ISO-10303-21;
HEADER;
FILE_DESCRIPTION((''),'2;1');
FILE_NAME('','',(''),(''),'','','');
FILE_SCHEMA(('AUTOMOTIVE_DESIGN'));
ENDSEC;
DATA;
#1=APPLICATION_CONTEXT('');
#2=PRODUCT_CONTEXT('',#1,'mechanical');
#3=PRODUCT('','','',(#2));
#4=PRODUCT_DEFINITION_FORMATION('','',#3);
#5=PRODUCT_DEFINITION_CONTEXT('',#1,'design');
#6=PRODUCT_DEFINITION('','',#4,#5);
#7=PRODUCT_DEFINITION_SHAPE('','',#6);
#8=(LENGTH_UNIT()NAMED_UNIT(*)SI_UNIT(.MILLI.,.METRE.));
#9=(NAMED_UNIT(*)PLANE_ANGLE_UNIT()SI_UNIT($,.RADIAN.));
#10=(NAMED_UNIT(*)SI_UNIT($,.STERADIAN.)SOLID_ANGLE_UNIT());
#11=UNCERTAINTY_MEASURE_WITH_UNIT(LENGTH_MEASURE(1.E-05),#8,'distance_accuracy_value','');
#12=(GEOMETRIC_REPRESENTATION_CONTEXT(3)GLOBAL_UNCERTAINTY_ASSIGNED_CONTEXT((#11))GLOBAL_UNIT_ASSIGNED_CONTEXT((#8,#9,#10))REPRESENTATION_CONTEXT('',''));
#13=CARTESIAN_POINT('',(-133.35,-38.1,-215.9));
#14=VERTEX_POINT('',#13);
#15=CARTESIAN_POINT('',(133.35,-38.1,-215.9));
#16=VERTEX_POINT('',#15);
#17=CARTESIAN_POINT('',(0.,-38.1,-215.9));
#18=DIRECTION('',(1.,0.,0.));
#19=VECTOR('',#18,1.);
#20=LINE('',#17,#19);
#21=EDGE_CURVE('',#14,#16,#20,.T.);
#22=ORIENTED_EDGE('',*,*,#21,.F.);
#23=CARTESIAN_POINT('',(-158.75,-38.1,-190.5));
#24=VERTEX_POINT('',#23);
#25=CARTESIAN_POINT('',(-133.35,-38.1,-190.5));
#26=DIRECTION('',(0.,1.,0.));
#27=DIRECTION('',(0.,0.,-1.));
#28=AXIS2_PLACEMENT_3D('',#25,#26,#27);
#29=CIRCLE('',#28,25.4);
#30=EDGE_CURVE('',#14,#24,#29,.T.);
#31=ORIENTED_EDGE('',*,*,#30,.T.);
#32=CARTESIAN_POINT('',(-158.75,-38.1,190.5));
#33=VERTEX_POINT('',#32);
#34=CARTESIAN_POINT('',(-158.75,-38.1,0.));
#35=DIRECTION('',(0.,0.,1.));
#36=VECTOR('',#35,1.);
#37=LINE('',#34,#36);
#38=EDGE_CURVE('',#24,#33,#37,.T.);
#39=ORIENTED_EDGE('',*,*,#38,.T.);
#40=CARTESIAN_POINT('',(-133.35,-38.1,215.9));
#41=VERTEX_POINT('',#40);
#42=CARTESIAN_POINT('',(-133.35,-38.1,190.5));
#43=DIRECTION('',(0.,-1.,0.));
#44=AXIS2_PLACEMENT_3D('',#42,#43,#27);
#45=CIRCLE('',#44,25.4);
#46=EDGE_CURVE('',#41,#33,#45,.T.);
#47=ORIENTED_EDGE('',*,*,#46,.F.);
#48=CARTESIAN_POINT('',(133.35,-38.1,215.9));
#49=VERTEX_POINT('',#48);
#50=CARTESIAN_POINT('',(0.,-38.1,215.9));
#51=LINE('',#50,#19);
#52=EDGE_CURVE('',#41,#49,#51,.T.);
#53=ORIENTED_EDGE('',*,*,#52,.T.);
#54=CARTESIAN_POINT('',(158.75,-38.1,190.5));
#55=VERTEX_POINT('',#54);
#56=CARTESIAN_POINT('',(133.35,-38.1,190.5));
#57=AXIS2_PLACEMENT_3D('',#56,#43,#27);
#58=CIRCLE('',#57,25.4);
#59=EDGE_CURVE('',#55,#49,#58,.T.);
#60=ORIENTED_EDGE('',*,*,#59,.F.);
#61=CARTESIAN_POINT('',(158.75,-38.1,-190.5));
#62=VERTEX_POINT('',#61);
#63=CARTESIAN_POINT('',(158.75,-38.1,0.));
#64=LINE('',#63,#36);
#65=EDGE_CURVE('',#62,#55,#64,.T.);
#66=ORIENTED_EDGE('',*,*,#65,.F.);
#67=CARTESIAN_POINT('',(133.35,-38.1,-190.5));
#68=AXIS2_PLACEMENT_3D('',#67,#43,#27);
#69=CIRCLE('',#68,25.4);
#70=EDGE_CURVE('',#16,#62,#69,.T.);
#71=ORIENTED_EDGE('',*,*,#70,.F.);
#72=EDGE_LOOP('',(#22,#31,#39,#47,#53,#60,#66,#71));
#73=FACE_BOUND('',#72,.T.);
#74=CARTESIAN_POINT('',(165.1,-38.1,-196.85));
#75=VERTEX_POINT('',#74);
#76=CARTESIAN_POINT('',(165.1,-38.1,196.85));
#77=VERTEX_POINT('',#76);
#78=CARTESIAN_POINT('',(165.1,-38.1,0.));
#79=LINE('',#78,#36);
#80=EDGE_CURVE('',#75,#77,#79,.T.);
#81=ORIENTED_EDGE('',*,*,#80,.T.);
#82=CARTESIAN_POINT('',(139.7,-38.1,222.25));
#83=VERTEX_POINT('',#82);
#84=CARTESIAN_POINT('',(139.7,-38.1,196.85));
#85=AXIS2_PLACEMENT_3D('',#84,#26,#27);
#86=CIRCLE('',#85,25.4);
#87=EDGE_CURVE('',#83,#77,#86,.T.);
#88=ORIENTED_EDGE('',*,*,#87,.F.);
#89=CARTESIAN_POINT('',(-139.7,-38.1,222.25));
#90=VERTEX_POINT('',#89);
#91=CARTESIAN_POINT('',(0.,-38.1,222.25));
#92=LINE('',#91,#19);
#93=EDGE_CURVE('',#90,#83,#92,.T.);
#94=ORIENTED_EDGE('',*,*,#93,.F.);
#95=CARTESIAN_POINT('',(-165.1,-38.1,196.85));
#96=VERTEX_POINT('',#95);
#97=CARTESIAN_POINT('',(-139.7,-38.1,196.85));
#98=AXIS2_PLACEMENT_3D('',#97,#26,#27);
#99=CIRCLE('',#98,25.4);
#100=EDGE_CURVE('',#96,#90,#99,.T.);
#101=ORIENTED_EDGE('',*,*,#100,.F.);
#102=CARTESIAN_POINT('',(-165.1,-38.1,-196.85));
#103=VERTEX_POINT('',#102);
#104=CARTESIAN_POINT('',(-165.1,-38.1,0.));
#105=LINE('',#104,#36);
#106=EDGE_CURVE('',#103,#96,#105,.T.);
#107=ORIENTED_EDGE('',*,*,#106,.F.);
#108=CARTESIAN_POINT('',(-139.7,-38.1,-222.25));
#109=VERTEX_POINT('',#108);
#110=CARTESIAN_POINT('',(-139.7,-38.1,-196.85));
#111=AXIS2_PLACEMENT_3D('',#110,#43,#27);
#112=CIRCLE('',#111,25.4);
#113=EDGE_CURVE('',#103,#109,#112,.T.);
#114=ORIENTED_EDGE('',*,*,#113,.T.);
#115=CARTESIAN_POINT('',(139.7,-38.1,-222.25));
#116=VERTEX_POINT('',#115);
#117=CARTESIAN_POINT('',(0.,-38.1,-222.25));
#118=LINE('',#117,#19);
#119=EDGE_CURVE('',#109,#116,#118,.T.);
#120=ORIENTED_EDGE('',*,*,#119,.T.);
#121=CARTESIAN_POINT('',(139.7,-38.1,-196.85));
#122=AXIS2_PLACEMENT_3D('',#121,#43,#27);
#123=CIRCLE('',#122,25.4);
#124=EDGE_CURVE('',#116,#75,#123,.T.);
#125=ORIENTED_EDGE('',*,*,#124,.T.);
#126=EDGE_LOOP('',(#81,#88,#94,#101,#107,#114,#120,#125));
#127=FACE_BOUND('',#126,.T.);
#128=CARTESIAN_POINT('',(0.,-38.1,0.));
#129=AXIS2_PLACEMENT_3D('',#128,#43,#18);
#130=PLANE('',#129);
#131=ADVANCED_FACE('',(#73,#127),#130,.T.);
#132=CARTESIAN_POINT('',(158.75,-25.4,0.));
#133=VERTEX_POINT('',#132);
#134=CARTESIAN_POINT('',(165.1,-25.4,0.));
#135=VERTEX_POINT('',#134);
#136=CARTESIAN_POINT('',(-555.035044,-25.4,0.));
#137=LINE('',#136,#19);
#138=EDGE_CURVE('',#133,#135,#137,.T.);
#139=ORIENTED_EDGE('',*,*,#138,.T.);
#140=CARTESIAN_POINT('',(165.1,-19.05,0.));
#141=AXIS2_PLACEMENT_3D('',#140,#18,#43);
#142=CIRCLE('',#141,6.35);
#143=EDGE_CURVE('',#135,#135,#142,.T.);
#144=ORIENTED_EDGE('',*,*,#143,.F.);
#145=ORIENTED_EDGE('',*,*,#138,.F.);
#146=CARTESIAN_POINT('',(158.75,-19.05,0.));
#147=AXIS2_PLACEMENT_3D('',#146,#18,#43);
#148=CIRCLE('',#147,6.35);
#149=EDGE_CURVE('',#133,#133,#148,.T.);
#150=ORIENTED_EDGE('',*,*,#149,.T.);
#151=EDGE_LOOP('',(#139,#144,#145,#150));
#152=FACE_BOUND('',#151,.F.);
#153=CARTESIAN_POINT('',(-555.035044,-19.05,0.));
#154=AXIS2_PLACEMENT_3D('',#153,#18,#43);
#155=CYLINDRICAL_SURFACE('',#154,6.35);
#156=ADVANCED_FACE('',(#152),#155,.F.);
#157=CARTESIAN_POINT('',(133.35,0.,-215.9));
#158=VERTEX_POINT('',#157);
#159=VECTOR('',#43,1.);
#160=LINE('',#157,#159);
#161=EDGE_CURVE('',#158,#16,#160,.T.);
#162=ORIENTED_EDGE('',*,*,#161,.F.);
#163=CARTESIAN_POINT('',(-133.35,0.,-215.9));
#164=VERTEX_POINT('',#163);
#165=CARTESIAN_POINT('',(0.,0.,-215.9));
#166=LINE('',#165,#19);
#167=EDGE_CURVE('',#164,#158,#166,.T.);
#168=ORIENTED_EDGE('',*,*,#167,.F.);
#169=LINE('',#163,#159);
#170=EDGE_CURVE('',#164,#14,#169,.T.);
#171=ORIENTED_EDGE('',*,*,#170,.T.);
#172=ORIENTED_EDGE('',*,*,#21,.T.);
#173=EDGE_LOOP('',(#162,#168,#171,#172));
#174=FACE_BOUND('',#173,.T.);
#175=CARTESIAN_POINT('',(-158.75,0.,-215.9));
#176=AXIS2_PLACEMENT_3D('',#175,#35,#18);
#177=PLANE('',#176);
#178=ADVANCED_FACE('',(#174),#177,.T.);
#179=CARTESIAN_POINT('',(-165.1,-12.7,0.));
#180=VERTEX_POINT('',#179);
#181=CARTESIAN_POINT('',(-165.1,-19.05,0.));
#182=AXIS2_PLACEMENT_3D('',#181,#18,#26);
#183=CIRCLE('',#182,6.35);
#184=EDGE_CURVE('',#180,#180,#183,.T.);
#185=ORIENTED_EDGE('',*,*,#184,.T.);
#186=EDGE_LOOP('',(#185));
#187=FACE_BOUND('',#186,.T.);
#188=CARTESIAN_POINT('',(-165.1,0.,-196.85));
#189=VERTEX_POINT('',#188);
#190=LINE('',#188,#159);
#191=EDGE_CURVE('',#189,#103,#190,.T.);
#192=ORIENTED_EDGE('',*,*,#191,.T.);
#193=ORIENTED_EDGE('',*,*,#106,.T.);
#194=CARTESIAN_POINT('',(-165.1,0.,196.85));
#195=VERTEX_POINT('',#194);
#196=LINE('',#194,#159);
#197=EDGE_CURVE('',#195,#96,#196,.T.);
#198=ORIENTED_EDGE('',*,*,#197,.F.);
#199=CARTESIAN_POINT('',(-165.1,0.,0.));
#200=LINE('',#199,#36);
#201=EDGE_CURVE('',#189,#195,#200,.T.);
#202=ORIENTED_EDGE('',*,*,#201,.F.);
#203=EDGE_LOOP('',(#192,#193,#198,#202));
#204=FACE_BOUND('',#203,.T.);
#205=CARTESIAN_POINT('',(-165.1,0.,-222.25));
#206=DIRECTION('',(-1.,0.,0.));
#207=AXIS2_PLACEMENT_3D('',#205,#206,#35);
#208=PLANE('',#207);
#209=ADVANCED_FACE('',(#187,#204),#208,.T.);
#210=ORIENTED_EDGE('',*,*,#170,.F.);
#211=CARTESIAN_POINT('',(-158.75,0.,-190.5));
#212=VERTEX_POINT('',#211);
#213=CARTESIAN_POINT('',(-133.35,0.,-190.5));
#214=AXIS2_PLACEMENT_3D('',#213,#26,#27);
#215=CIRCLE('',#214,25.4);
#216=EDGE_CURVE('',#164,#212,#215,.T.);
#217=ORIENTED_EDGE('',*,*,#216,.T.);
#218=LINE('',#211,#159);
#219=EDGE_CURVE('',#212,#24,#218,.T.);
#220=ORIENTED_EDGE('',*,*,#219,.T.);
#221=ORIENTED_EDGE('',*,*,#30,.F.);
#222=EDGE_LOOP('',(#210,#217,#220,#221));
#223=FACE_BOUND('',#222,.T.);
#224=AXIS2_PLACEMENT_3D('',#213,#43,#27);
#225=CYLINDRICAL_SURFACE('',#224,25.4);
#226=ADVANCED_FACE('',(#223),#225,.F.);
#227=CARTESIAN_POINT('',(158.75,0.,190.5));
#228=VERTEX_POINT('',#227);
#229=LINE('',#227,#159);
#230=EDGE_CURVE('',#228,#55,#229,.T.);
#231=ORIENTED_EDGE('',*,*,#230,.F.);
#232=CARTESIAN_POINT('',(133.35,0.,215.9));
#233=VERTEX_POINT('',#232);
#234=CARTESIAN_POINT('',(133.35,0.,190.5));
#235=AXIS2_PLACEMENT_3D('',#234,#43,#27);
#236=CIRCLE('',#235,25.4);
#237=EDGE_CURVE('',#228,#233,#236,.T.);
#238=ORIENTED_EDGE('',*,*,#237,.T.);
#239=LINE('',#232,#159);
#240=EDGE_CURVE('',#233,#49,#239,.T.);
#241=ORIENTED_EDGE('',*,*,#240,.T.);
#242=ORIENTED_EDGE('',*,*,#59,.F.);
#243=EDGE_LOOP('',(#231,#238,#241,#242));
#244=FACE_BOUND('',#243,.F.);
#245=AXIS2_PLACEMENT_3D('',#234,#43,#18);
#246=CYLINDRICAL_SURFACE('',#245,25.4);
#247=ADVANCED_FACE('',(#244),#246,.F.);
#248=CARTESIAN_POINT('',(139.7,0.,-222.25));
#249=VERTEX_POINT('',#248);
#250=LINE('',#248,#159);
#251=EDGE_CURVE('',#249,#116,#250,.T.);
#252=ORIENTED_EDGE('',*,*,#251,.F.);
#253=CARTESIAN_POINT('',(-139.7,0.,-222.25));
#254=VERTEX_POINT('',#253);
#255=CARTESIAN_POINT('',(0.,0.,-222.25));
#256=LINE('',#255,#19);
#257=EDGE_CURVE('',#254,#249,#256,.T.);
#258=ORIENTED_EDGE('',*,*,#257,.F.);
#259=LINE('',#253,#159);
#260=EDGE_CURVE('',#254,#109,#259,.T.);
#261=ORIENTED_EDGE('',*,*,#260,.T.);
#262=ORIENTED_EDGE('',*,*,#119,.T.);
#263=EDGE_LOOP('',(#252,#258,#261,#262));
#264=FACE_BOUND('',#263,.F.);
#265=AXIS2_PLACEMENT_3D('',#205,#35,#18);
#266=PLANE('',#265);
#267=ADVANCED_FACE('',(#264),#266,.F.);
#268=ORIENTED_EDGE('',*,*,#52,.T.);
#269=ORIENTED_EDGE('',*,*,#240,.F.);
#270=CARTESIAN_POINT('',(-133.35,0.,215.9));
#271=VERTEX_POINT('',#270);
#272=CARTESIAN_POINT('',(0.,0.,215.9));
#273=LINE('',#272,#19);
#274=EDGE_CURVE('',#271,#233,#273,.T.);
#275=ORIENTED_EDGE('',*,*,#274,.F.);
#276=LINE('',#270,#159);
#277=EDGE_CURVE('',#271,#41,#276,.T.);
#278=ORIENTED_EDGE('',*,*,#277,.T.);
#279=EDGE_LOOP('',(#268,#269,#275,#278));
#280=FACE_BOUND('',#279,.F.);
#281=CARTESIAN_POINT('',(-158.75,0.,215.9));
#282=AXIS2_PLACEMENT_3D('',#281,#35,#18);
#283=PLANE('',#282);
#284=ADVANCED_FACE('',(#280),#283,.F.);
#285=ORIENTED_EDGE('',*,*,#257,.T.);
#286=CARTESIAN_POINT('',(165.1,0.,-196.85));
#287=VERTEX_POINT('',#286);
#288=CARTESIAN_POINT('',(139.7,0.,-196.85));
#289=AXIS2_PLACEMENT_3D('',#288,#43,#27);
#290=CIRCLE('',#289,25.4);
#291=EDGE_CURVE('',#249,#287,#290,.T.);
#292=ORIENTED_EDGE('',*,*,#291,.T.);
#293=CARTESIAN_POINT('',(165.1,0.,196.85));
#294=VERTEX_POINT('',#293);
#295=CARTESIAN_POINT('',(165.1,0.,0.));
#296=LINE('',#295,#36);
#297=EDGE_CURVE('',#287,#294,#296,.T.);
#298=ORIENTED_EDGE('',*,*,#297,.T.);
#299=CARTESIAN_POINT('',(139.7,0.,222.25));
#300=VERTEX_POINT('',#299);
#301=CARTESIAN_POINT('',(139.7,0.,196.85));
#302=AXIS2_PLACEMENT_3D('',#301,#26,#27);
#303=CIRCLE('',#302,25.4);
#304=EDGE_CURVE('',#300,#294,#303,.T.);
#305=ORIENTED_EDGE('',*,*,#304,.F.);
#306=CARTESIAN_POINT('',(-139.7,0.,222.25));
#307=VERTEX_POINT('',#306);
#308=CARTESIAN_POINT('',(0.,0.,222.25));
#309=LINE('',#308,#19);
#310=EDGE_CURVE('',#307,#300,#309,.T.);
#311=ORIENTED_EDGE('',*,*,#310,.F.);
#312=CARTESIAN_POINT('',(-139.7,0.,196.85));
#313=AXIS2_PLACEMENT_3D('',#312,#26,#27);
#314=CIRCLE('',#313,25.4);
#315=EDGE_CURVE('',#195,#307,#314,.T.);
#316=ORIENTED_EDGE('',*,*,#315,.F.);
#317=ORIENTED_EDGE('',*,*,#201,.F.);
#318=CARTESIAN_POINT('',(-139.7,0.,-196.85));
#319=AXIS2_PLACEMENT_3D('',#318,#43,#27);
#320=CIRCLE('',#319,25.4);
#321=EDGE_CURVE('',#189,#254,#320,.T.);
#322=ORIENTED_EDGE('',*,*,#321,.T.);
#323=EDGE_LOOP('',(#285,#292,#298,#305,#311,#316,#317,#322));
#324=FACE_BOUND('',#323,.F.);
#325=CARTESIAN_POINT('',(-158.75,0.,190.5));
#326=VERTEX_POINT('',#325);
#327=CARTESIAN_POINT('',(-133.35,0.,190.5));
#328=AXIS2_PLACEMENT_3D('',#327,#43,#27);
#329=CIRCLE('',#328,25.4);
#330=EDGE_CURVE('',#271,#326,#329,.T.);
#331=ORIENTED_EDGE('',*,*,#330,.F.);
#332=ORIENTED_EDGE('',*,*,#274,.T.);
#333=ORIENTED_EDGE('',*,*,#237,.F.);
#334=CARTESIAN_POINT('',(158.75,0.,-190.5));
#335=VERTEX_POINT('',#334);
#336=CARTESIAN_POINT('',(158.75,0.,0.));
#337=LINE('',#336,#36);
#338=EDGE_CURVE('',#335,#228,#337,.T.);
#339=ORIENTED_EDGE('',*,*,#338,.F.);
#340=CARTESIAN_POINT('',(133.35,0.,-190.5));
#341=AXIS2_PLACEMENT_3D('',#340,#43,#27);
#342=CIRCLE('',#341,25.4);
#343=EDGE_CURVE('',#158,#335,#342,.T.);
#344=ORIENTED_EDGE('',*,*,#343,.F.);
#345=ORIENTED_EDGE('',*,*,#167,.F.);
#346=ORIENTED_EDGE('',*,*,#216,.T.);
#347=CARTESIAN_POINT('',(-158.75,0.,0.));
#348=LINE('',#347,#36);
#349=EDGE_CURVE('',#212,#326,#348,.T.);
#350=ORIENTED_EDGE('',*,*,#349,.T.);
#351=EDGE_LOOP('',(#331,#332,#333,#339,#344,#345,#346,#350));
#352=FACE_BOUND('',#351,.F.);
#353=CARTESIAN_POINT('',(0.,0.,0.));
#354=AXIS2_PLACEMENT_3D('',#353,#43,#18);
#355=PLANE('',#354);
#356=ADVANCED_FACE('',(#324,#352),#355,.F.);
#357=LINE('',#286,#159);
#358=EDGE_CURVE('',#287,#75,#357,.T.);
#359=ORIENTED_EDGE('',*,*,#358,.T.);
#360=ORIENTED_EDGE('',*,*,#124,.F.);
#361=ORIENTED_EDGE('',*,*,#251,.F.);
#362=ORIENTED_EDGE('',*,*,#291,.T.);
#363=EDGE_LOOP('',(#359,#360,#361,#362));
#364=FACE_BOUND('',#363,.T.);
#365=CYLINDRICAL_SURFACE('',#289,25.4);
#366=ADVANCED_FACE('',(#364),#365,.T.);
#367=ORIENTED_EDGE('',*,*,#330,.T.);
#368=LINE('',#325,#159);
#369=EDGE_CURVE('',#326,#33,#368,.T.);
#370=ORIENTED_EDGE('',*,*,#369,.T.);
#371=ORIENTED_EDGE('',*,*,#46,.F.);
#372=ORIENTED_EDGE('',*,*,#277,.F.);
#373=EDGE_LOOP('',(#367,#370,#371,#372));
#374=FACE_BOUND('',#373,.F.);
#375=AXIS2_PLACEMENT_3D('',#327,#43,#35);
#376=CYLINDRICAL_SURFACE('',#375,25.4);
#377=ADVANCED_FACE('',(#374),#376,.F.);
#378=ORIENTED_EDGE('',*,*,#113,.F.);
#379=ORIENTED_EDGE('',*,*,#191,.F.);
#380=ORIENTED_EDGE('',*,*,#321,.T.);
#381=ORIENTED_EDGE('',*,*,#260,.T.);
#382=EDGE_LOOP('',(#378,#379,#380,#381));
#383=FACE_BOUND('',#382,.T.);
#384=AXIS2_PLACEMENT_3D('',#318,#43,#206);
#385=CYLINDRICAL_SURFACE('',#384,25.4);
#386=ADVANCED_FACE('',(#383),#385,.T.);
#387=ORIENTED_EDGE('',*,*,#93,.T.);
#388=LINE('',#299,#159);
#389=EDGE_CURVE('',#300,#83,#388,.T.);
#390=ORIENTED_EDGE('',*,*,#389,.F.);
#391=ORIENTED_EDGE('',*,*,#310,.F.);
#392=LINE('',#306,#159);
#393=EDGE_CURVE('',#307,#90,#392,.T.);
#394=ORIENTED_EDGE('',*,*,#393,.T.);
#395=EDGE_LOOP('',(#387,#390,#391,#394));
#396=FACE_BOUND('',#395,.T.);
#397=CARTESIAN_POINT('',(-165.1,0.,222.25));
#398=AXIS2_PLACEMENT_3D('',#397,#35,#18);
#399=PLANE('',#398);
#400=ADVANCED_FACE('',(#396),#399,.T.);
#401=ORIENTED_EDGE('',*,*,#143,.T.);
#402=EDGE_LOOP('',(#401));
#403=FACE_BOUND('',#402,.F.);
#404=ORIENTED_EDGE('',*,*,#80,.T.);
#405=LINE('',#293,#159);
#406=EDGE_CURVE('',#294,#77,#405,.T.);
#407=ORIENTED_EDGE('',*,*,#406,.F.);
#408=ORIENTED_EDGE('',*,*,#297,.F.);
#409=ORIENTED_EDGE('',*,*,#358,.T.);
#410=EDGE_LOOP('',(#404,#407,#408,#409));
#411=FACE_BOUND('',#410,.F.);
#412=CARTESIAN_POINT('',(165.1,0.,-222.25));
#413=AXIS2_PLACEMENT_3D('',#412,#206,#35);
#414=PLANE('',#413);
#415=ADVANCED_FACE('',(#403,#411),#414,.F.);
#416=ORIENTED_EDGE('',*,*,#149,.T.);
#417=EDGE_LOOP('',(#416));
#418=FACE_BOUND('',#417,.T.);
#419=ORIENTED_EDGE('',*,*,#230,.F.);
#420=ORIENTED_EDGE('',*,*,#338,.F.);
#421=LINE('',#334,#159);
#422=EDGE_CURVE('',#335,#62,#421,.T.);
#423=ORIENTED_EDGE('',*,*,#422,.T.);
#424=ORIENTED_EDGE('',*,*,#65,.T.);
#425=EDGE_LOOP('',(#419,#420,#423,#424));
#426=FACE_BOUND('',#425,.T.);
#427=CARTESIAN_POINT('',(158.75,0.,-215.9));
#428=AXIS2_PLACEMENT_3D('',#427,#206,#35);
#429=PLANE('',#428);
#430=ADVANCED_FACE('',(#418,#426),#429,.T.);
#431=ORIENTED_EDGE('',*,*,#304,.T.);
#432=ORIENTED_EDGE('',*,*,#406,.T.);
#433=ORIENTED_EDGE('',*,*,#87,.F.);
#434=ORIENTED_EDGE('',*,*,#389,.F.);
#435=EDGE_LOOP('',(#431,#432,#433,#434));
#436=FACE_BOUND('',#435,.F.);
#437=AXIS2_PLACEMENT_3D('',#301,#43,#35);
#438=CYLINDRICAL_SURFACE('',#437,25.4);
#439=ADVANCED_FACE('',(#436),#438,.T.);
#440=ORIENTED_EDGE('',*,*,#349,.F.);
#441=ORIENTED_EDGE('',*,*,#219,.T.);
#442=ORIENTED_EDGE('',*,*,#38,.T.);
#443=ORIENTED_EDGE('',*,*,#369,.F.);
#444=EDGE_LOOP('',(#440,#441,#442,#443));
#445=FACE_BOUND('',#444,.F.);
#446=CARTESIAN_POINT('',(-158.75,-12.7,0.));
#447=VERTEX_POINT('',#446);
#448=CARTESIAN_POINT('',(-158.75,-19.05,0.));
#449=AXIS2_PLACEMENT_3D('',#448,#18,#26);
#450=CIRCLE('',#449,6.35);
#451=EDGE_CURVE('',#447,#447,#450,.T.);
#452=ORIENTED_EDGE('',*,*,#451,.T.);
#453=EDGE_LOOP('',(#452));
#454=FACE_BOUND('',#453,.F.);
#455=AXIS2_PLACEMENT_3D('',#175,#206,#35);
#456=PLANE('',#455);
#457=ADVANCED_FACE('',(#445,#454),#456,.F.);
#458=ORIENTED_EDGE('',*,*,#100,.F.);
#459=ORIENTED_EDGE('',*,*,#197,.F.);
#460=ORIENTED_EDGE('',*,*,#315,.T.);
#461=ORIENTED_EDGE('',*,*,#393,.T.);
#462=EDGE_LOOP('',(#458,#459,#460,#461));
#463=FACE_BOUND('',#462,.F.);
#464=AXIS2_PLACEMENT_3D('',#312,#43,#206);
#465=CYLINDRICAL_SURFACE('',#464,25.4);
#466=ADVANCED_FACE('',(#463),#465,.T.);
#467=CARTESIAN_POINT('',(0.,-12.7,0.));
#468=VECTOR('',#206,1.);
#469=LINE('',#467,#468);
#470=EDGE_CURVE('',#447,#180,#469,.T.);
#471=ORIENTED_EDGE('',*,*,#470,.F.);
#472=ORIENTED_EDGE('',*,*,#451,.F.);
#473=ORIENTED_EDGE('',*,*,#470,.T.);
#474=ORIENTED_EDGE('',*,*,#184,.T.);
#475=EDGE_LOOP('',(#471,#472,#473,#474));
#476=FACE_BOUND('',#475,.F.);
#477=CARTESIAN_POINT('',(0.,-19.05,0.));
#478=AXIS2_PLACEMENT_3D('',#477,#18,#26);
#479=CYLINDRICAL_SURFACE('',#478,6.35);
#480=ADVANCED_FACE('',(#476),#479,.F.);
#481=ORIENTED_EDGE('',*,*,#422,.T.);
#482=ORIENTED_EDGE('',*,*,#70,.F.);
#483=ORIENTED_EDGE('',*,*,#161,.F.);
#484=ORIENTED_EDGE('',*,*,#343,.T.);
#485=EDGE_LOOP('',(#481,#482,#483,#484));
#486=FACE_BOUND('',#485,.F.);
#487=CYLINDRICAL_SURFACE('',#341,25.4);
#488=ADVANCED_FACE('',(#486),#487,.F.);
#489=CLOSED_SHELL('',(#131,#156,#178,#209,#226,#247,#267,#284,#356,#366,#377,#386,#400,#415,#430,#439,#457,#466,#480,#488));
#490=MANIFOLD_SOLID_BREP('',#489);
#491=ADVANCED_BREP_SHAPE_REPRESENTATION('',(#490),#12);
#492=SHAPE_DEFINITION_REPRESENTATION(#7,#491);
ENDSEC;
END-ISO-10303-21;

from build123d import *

# Parameters (mm, degrees)
F0_W     = 330.2
F0_H     = 444.5
F0_W_2   = 317.5
F0_H_2   = 431.8
F1_DEPTH = 38.1
F2_R     = 25.4
F3_D     = 12.7
F3_DEPTH = 165.101
F4_D     = 12.7


with BuildPart() as f1:
    # F0 (on Front) → F1 (new body)
    with BuildSketch(Plane.XZ):
        Rectangle(F0_W, F0_H)
        Rectangle(F0_W_2, F0_H_2, mode=Mode.SUBTRACT)
    extrude(amount=F1_DEPTH)

    # F2
    f2_edges = [f1.edges().sort_by_distance(p)[0] for p in [
        (158.75, -19.05, -215.9),
        (158.75, -19.05, 215.9),
        (-158.75, -19.05, 215.9),
        (-158.75, -19.05, -215.9),
        (165.1, -19.05, 222.25),
        (165.1, -19.05, -222.25),
        (-165.1, -19.05, -222.25),
        (-165.1, -19.05, 222.25),
    ]]
    fillet(f2_edges, radius=F2_R)

    # F3 (through all, one way)
    with BuildSketch(Plane.YZ):
        with Locations((-19.05, 0)):
            Circle(F3_D / 2)
    extrude(amount=-F3_DEPTH, mode=Mode.SUBTRACT)

    # F4 (through all)
    with Locations(Plane(origin=(0, 0, 0), x_dir=(0, 1, 0), z_dir=(-1, 0, 0))):
        with Locations((-19.05, 0)):
            Hole(F4_D / 2)


solid = f1.part
